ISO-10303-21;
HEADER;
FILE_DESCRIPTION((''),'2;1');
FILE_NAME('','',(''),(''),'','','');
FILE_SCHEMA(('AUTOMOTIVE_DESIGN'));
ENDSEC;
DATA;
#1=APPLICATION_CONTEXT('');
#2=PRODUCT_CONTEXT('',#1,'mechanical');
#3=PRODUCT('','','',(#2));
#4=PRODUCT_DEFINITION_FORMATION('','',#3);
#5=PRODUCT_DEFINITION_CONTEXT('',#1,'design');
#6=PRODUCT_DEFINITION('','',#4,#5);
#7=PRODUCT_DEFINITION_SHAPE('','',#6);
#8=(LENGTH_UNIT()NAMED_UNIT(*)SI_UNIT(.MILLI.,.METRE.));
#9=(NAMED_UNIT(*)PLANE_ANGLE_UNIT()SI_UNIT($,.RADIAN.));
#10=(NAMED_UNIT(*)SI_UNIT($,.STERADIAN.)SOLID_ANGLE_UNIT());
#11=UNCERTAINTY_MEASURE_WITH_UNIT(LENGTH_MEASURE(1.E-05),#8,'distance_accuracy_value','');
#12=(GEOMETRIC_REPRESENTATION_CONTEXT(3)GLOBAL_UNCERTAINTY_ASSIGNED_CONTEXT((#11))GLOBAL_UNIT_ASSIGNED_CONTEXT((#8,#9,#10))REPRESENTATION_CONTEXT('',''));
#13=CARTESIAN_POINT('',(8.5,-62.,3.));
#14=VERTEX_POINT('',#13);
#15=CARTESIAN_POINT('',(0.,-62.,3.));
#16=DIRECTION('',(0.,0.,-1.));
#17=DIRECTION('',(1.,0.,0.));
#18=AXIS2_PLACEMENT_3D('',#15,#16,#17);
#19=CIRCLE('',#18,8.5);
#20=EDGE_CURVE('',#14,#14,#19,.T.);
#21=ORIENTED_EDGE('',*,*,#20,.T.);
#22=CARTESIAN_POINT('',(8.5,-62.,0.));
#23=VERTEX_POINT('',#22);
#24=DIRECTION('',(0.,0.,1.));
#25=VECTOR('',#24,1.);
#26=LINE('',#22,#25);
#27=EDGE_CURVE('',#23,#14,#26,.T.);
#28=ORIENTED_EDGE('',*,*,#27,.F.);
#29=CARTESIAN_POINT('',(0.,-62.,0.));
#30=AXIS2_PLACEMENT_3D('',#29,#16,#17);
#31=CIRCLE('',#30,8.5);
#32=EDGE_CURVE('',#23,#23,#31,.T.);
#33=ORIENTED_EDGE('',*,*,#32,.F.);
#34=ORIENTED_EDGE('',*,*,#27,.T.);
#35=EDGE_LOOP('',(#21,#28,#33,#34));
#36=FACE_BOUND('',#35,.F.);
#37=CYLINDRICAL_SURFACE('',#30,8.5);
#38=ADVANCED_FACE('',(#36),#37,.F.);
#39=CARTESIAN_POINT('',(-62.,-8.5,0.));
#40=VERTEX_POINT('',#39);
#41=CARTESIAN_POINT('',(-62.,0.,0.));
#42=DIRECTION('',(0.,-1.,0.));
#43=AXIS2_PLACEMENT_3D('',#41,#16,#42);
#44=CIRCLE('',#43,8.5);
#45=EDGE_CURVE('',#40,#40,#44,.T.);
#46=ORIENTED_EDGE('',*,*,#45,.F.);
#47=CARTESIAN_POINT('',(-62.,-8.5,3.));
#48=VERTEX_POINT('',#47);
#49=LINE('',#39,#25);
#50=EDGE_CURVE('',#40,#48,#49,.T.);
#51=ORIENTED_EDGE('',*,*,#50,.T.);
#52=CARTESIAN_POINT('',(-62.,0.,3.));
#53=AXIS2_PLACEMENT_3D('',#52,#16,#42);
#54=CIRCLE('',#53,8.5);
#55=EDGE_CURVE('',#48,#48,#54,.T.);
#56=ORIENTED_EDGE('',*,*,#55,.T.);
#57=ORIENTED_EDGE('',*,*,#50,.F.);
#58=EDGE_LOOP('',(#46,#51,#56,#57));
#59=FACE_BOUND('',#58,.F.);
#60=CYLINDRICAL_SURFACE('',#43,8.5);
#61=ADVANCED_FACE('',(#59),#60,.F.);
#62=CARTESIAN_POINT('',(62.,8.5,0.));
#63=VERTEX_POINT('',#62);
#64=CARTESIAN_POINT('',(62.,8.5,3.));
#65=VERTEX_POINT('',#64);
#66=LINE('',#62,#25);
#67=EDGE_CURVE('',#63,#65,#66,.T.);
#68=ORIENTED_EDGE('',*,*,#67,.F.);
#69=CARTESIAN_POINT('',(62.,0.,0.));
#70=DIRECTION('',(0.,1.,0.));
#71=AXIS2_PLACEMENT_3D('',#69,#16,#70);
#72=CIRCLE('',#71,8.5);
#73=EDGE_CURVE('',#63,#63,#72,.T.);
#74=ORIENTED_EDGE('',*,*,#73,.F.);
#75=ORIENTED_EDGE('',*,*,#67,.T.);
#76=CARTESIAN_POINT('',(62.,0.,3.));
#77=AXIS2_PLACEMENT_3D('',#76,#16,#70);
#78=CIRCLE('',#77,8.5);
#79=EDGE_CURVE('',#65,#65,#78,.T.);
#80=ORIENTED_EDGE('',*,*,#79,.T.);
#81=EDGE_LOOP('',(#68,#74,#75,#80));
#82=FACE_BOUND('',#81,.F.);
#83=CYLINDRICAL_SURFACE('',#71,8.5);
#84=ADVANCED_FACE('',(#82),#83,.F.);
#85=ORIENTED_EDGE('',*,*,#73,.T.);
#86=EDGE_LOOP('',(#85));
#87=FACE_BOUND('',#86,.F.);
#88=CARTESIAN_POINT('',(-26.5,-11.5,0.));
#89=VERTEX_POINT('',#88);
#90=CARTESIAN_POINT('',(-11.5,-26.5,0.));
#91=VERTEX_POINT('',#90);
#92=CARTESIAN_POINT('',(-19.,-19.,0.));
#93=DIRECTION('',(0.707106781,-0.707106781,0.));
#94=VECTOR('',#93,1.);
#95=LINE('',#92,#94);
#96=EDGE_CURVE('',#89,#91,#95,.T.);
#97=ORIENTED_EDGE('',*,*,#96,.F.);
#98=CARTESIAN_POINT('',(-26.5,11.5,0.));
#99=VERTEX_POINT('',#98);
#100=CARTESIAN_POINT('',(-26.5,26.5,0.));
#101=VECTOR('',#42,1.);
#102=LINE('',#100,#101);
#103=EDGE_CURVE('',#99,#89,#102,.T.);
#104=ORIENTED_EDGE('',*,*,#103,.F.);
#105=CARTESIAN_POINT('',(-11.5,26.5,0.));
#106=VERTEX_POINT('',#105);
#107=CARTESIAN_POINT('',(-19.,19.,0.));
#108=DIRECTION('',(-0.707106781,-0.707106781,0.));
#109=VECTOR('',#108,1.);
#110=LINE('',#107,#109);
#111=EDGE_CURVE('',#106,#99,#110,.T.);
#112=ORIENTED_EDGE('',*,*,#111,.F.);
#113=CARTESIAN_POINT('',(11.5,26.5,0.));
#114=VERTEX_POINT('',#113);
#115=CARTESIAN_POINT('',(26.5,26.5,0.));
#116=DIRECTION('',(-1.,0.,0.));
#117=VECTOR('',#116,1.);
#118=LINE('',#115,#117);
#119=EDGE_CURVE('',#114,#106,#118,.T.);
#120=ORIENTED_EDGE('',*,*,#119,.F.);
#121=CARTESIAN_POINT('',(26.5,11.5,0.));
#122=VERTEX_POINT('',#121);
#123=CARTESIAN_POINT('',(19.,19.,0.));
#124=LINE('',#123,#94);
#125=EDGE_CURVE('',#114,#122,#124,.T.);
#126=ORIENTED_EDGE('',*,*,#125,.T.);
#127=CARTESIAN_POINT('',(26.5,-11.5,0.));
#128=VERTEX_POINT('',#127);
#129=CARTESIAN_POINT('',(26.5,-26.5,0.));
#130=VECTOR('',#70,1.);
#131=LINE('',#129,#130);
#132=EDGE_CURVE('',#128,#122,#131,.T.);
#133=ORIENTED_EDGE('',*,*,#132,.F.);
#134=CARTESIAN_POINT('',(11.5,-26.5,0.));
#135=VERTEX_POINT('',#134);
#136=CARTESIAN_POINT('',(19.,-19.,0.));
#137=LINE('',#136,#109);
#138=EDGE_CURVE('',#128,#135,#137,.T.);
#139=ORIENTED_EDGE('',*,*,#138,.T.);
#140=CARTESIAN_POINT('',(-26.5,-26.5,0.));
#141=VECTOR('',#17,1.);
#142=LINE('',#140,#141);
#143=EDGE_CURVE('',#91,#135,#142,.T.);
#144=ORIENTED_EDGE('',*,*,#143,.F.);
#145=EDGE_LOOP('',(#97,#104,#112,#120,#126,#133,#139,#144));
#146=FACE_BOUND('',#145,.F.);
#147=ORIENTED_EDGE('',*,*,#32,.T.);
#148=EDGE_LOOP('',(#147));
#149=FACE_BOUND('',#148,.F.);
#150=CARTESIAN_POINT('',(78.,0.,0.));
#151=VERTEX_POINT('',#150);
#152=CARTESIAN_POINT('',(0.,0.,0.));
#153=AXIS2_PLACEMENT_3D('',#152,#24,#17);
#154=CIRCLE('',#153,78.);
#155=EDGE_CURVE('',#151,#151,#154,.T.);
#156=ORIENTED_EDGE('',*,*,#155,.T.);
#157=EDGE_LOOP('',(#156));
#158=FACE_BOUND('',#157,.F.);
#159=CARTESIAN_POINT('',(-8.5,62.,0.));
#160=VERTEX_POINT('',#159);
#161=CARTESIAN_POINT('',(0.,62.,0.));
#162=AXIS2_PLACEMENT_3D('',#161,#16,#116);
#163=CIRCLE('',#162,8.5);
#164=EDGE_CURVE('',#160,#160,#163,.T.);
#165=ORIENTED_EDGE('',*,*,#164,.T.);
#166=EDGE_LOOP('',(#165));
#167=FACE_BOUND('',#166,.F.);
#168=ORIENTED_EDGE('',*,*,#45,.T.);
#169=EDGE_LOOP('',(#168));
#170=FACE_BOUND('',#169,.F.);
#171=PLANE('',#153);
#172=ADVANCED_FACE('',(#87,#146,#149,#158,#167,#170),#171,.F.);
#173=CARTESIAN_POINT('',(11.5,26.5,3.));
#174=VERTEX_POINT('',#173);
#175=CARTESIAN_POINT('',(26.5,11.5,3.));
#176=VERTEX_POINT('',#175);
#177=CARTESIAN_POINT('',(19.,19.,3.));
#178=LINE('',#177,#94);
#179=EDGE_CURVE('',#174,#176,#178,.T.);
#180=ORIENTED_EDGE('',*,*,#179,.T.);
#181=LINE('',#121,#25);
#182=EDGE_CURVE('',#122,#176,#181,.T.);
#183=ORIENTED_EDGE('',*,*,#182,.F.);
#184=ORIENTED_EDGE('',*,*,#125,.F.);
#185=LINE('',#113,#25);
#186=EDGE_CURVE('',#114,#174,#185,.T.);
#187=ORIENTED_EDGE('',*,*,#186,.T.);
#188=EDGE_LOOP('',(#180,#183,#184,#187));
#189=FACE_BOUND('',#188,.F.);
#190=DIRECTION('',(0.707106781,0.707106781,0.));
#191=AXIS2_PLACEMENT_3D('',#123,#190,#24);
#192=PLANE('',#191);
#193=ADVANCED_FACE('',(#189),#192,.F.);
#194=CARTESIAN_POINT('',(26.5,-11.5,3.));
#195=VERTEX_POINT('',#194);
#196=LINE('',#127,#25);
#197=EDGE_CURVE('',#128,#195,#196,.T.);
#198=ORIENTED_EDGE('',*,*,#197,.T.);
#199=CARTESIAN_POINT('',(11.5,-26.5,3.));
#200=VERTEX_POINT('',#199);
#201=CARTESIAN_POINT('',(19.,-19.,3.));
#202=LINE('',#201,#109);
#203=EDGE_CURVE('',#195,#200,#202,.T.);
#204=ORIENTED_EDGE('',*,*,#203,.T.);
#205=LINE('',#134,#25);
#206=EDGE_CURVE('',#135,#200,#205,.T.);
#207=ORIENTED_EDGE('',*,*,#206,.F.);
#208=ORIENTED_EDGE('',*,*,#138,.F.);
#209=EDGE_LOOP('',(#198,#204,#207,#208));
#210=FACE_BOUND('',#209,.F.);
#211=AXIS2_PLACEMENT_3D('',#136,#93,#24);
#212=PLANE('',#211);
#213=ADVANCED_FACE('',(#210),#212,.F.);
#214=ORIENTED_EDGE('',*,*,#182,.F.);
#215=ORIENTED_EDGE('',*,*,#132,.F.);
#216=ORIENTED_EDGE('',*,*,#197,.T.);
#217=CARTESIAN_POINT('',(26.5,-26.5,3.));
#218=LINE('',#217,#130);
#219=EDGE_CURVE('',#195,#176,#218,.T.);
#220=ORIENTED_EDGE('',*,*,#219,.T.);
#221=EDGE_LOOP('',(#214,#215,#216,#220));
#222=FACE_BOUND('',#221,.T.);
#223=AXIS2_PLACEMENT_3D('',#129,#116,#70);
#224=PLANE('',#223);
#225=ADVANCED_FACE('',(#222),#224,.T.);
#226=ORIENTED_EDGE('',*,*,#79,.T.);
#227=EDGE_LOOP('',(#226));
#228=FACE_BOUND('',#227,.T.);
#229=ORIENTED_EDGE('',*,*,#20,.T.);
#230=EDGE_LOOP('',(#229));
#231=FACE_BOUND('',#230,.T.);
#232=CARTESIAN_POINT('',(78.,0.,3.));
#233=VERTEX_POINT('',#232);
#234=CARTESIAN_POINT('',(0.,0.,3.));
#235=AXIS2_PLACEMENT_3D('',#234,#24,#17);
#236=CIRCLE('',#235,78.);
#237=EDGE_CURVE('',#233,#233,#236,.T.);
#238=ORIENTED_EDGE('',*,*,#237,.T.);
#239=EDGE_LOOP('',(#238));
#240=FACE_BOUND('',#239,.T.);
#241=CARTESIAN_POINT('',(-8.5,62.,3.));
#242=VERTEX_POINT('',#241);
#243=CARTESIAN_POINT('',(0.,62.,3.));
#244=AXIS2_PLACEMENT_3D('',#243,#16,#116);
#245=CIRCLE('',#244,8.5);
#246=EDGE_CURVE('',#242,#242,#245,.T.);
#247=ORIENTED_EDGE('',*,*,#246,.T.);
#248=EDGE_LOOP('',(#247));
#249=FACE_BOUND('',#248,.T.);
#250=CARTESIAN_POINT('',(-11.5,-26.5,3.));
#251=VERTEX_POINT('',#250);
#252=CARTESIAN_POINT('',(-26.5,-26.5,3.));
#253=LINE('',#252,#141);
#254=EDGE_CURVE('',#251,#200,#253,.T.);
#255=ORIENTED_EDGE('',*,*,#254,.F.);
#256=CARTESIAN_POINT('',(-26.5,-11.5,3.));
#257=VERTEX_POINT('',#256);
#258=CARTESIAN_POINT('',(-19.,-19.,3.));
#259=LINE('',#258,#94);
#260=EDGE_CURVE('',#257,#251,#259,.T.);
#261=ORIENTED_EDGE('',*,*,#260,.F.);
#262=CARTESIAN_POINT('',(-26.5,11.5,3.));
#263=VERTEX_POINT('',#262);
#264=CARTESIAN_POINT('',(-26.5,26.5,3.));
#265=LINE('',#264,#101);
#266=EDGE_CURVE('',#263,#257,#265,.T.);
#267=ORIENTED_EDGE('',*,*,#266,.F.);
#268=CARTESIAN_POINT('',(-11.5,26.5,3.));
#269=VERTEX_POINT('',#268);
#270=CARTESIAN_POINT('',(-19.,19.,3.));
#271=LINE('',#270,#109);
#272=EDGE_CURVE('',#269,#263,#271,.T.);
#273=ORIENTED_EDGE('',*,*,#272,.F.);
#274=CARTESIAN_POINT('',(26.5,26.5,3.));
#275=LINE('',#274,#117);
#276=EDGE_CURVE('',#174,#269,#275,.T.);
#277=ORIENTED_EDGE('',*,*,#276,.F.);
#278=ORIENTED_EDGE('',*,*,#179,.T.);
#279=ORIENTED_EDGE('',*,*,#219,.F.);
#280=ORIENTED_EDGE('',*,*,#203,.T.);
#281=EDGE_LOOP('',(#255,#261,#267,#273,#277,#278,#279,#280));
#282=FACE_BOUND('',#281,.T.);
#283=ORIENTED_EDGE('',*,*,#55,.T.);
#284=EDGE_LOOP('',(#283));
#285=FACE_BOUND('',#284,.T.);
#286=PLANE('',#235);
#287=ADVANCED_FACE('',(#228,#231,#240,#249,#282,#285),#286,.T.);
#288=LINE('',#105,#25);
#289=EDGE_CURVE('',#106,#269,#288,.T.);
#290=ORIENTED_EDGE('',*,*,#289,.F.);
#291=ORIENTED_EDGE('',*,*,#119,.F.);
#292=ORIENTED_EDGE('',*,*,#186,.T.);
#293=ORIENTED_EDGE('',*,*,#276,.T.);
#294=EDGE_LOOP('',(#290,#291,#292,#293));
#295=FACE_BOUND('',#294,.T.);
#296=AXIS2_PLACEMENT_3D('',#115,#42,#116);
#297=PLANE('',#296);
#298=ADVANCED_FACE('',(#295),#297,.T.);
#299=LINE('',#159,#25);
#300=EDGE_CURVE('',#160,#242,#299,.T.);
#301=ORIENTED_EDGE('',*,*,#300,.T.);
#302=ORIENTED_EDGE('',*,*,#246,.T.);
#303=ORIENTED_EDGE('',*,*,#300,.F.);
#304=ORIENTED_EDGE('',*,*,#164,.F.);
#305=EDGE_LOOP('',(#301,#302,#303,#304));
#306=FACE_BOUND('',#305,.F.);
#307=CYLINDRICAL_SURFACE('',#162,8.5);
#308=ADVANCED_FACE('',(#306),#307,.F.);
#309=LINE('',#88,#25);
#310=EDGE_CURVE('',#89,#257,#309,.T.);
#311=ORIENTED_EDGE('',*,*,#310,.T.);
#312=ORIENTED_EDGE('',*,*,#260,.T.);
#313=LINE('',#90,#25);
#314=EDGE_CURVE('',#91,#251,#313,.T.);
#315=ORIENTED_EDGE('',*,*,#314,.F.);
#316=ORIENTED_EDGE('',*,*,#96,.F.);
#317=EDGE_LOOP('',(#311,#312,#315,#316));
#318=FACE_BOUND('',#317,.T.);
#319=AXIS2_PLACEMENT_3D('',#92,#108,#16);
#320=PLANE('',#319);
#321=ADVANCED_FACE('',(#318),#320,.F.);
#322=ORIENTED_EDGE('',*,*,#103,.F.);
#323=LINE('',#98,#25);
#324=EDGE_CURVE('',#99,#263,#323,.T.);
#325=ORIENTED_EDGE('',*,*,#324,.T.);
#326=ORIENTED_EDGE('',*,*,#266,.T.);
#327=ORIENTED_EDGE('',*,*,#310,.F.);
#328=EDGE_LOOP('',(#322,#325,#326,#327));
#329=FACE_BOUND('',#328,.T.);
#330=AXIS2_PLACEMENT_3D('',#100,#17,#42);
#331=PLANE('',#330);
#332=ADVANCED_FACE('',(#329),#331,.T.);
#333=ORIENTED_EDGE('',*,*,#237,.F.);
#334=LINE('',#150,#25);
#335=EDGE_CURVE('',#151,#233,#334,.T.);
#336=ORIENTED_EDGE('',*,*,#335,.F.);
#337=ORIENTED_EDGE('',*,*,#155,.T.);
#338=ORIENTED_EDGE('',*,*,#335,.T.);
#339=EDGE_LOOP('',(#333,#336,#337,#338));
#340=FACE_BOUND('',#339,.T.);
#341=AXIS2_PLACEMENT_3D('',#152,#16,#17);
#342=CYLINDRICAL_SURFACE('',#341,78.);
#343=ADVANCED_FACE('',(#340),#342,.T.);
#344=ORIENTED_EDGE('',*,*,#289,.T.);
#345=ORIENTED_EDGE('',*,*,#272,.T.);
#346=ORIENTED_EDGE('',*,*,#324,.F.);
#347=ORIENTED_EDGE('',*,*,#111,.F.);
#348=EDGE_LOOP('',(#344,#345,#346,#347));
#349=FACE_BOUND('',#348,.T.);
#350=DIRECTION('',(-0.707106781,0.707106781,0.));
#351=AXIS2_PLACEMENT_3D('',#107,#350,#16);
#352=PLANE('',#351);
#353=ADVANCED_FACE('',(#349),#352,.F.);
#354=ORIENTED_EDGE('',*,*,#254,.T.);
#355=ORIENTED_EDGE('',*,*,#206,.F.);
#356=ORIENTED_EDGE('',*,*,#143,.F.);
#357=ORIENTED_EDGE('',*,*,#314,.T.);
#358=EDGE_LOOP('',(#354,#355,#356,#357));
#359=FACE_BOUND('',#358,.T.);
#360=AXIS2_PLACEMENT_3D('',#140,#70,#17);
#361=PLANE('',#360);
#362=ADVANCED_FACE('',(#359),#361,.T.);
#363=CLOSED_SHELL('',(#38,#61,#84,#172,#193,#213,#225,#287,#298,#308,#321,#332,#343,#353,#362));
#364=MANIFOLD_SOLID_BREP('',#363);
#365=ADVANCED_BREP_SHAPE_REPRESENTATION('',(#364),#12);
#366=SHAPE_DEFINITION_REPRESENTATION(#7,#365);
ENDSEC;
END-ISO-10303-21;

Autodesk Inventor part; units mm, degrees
ref_plane "YZ Plane" through (0, 0, 0) normal (1, 0, 0) x (0, 1, 0)
ref_plane "XZ Plane" through (0, 0, 0) normal (0, 1, 0) x (-1, 0, 0)
ref_plane "XY Plane" through (0, 0, 0) normal (0, 0, 1) x (1, 0, 0)
sketch "Sketch1" plane through (0, 0, 0) normal (0, 0, 1) x (1, 0, 0)
  circle A0 centre (0, 0) radius 78
  line L0 (26.5, 26.5) -> (-26.5, 26.5)
  line L1 (-26.5, 26.5) -> (-26.5, -26.5)
  line L2 (-26.5, -26.5) -> (26.5, -26.5)
  line L3 (26.5, -26.5) -> (26.5, 26.5)
  line L4 (26.5, 26.5) -> (-26.5, -26.5) construction
  line L5 (-26.5, 26.5) -> (26.5, -26.5) construction
  dimension "d157" = 156
  dimension "d158" = 53
  dimension "d159" = 53
extrude "Plate5" add sketch "Sketch1" along normal blind 3
sketch "Sketch7" plane through (0, 0, 0) normal (0, 0, -1) x (-1, 0, 0)
  circle A0 centre (0, 62) radius 8.5
  point P0 (0, 0)
  dimension "d160" = 17
  dimension "d161" = 62
extrude "Cut1" cut sketch "Sketch7" against normal blind 3
pattern_circular "Circular Pattern1" count 4 over 360 about axis through (0, 0, -10) along (0, 0, 1) of "Cut1"
chamfer "Corner Chamfer2" distance 15 angle 45 4 edges at (-26.5, -26.5, 1.5) (26.5, -26.5, 1.5) (-26.5, 26.5, 1.5) (26.5, 26.5, 1.5)
properties part number "PNS 1792  funnel FLANGE 1200 50-90_1600" material "Stainless Steel"
